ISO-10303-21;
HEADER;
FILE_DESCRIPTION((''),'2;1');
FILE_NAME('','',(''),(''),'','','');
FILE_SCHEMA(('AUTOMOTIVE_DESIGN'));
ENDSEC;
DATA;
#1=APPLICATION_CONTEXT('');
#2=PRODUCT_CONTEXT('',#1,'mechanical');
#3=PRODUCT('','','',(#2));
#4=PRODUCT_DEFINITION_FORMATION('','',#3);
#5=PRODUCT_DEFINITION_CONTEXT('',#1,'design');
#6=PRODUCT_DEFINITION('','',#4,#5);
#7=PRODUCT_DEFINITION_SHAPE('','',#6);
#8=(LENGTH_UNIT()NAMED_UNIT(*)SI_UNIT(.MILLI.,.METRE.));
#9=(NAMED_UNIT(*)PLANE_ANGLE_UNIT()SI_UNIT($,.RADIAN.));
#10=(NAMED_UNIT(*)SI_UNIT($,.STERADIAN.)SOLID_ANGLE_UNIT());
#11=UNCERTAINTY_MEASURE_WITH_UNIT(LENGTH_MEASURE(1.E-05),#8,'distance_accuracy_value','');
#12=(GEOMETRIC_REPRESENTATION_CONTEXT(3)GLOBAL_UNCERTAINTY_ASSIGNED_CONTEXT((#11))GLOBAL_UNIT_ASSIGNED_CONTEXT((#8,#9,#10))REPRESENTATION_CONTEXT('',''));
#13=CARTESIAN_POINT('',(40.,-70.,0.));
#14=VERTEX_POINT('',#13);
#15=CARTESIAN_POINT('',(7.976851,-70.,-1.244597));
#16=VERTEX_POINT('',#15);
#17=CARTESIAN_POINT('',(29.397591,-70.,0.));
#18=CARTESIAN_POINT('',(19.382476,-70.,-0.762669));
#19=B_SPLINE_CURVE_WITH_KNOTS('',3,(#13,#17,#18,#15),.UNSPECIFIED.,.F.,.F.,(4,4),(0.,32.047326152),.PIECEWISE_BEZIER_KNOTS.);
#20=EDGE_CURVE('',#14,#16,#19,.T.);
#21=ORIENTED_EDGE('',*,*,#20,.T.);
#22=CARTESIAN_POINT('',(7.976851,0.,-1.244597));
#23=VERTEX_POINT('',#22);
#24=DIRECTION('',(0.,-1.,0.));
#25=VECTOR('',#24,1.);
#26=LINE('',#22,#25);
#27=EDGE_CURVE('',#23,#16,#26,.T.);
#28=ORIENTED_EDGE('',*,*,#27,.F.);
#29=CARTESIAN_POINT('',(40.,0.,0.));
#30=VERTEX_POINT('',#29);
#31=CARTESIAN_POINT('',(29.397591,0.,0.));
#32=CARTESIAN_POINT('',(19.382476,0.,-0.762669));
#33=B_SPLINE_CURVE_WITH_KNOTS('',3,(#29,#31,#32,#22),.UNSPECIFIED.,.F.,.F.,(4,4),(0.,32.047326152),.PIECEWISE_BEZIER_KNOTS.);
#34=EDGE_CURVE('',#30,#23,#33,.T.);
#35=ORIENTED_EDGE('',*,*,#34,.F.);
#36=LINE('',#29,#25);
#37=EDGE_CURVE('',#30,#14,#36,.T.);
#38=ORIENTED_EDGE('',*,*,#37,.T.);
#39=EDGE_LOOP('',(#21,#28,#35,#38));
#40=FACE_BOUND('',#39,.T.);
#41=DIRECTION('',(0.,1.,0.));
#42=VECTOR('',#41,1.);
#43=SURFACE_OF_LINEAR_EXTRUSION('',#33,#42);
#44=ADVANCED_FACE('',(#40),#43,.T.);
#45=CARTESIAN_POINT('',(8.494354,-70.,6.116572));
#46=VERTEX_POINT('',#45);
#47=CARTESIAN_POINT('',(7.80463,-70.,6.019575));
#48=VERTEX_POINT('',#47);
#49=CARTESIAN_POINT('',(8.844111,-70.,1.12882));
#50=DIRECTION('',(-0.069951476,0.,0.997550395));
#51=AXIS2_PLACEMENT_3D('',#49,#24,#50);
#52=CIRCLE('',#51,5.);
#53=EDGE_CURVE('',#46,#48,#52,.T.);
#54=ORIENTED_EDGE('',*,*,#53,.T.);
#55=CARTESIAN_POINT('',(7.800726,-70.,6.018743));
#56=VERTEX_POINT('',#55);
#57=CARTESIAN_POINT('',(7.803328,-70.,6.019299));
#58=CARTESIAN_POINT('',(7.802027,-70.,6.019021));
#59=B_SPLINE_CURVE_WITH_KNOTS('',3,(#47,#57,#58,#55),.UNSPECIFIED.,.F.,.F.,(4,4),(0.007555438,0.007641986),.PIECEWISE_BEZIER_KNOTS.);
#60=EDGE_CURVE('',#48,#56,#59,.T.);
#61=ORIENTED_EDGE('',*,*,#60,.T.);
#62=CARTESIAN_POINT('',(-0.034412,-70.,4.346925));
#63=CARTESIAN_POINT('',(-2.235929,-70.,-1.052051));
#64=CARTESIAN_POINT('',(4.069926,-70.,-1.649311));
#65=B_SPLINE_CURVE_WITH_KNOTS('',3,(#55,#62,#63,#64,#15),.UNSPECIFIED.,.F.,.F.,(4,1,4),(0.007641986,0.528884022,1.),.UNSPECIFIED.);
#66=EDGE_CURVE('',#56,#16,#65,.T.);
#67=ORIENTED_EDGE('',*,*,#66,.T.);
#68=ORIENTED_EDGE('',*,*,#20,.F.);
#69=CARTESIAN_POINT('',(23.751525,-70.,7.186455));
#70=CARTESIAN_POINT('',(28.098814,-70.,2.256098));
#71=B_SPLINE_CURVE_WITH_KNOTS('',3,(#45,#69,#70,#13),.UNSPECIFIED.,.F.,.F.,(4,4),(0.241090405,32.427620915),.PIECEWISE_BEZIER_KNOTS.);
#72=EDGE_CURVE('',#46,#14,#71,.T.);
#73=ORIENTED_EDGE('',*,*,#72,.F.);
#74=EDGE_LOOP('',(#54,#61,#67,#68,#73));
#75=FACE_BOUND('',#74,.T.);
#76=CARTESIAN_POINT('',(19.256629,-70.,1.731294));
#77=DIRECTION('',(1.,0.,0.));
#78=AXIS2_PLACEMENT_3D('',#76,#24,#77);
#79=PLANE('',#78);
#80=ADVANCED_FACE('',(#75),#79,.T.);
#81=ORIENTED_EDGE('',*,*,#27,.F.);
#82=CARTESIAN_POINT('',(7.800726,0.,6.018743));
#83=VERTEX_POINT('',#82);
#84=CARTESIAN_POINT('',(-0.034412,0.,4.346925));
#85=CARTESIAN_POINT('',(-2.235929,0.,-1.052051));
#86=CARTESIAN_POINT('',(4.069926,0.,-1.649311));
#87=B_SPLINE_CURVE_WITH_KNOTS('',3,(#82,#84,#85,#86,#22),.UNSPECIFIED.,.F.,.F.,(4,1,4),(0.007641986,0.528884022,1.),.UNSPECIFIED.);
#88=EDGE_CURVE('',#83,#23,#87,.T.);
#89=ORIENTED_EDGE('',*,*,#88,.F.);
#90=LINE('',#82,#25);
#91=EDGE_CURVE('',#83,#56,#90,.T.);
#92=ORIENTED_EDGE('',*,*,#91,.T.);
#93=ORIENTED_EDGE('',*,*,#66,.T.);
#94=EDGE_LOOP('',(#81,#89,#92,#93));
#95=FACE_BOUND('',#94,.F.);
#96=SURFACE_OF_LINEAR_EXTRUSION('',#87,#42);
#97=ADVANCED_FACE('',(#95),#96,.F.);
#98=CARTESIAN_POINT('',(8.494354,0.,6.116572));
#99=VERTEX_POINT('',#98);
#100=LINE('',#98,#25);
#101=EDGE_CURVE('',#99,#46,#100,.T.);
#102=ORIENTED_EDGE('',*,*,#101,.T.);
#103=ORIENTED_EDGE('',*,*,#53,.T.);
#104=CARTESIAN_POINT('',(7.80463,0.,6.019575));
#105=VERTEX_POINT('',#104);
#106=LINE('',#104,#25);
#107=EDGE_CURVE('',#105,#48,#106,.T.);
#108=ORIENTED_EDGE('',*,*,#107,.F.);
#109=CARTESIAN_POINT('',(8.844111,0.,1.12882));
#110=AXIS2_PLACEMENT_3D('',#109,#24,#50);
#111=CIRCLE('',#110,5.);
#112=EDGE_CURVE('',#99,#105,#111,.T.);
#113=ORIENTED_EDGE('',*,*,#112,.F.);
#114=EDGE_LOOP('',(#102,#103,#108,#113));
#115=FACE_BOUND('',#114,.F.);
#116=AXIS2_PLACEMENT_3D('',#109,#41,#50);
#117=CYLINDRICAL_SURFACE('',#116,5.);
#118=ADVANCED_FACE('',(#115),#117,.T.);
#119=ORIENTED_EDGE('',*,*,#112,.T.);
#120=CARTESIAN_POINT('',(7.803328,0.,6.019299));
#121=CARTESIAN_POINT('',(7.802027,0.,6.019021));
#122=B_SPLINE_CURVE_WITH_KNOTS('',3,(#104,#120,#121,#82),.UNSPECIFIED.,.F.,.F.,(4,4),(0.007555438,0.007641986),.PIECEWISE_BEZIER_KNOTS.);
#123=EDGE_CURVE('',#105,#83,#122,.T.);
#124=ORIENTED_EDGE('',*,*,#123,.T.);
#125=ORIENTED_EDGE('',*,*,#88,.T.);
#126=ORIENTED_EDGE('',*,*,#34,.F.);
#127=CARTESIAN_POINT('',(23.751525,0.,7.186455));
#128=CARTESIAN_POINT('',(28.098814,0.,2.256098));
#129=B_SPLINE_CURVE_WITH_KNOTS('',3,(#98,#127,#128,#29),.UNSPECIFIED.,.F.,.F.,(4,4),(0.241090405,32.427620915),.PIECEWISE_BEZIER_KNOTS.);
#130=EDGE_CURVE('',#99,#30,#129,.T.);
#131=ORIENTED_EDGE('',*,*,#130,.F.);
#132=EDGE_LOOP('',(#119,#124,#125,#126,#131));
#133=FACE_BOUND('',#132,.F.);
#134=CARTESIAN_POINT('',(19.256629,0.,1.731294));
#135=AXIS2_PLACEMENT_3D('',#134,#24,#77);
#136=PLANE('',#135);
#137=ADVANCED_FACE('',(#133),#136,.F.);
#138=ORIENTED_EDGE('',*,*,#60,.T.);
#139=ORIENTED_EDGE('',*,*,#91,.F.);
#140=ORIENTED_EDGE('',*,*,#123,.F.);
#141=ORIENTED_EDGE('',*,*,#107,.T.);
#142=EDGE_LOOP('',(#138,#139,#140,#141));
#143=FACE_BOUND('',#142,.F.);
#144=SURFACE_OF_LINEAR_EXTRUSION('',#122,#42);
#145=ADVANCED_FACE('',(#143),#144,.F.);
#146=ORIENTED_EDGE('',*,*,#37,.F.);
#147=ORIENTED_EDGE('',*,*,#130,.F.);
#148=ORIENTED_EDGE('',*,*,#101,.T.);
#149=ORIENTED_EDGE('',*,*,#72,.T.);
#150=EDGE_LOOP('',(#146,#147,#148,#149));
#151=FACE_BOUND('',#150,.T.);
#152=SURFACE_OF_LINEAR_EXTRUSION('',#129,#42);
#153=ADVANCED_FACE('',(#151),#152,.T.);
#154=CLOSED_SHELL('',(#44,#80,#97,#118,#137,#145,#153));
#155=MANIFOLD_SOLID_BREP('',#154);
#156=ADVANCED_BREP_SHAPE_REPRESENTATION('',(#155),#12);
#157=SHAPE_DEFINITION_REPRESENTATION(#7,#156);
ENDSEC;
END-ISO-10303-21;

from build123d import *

# Parameters (mm, degrees)
F1_DEPTH = 70


# Not quite as in the source:
# - ends of sketch curves that miss each other by under 0.0002 mm in the source are joined


with BuildPart() as f1:
    # F0 (on Front) → F1 (new body)
    with BuildSketch(Plane.XZ):
        with BuildLine():
            ThreePointArc((8.4943538532, 6.1165723018), (8.1478009221, 6.0800981354), (7.80463009, 6.0195747612))
            add(Edge.make_bspline(
                [(7.80463009, 6.0195747612), (7.8033284675, 6.0192985857), (7.8020273177, 6.0190210249), (7.800726352, 6.018743432)],
                knots=[0.007555438, 0.007555438, 0.007555438, 0.007555438, 0.0076419863, 0.0076419863, 0.0076419863, 0.0076419863], degree=3))
            add(Edge.make_bspline(
                [(7.800726352, 6.018743432), (-0.0344115563, 4.3469248193), (-2.2359286822, -1.0520505926), (4.0699255085, -1.6493105494), (7.9768506791, -1.2445967448)],
                knots=[0.0076419863, 0.0076419863, 0.0076419863, 0.0076419863, 0.5288840216, 1, 1, 1, 1], degree=3))
            add(Edge.make_bspline(
                [(40, 0), (29.3975914618, 0), (19.3824759115, -0.7626691443), (7.9768506791, -1.2445967448)],
                knots=[0, 0, 0, 0, 32.0473261519, 32.0473261519, 32.0473261519, 32.0473261519], degree=3))
            add(Edge.make_bspline(
                [(8.4943538532, 6.1165723018), (23.7515253745, 7.1864547693), (28.0988142674, 2.2560978858), (40, 0)],
                knots=[0.2410904053, 0.2410904053, 0.2410904053, 0.2410904053, 32.4276209152, 32.4276209152, 32.4276209152, 32.4276209152], degree=3))
        make_face()
    extrude(amount=F1_DEPTH)


solid = f1.part
